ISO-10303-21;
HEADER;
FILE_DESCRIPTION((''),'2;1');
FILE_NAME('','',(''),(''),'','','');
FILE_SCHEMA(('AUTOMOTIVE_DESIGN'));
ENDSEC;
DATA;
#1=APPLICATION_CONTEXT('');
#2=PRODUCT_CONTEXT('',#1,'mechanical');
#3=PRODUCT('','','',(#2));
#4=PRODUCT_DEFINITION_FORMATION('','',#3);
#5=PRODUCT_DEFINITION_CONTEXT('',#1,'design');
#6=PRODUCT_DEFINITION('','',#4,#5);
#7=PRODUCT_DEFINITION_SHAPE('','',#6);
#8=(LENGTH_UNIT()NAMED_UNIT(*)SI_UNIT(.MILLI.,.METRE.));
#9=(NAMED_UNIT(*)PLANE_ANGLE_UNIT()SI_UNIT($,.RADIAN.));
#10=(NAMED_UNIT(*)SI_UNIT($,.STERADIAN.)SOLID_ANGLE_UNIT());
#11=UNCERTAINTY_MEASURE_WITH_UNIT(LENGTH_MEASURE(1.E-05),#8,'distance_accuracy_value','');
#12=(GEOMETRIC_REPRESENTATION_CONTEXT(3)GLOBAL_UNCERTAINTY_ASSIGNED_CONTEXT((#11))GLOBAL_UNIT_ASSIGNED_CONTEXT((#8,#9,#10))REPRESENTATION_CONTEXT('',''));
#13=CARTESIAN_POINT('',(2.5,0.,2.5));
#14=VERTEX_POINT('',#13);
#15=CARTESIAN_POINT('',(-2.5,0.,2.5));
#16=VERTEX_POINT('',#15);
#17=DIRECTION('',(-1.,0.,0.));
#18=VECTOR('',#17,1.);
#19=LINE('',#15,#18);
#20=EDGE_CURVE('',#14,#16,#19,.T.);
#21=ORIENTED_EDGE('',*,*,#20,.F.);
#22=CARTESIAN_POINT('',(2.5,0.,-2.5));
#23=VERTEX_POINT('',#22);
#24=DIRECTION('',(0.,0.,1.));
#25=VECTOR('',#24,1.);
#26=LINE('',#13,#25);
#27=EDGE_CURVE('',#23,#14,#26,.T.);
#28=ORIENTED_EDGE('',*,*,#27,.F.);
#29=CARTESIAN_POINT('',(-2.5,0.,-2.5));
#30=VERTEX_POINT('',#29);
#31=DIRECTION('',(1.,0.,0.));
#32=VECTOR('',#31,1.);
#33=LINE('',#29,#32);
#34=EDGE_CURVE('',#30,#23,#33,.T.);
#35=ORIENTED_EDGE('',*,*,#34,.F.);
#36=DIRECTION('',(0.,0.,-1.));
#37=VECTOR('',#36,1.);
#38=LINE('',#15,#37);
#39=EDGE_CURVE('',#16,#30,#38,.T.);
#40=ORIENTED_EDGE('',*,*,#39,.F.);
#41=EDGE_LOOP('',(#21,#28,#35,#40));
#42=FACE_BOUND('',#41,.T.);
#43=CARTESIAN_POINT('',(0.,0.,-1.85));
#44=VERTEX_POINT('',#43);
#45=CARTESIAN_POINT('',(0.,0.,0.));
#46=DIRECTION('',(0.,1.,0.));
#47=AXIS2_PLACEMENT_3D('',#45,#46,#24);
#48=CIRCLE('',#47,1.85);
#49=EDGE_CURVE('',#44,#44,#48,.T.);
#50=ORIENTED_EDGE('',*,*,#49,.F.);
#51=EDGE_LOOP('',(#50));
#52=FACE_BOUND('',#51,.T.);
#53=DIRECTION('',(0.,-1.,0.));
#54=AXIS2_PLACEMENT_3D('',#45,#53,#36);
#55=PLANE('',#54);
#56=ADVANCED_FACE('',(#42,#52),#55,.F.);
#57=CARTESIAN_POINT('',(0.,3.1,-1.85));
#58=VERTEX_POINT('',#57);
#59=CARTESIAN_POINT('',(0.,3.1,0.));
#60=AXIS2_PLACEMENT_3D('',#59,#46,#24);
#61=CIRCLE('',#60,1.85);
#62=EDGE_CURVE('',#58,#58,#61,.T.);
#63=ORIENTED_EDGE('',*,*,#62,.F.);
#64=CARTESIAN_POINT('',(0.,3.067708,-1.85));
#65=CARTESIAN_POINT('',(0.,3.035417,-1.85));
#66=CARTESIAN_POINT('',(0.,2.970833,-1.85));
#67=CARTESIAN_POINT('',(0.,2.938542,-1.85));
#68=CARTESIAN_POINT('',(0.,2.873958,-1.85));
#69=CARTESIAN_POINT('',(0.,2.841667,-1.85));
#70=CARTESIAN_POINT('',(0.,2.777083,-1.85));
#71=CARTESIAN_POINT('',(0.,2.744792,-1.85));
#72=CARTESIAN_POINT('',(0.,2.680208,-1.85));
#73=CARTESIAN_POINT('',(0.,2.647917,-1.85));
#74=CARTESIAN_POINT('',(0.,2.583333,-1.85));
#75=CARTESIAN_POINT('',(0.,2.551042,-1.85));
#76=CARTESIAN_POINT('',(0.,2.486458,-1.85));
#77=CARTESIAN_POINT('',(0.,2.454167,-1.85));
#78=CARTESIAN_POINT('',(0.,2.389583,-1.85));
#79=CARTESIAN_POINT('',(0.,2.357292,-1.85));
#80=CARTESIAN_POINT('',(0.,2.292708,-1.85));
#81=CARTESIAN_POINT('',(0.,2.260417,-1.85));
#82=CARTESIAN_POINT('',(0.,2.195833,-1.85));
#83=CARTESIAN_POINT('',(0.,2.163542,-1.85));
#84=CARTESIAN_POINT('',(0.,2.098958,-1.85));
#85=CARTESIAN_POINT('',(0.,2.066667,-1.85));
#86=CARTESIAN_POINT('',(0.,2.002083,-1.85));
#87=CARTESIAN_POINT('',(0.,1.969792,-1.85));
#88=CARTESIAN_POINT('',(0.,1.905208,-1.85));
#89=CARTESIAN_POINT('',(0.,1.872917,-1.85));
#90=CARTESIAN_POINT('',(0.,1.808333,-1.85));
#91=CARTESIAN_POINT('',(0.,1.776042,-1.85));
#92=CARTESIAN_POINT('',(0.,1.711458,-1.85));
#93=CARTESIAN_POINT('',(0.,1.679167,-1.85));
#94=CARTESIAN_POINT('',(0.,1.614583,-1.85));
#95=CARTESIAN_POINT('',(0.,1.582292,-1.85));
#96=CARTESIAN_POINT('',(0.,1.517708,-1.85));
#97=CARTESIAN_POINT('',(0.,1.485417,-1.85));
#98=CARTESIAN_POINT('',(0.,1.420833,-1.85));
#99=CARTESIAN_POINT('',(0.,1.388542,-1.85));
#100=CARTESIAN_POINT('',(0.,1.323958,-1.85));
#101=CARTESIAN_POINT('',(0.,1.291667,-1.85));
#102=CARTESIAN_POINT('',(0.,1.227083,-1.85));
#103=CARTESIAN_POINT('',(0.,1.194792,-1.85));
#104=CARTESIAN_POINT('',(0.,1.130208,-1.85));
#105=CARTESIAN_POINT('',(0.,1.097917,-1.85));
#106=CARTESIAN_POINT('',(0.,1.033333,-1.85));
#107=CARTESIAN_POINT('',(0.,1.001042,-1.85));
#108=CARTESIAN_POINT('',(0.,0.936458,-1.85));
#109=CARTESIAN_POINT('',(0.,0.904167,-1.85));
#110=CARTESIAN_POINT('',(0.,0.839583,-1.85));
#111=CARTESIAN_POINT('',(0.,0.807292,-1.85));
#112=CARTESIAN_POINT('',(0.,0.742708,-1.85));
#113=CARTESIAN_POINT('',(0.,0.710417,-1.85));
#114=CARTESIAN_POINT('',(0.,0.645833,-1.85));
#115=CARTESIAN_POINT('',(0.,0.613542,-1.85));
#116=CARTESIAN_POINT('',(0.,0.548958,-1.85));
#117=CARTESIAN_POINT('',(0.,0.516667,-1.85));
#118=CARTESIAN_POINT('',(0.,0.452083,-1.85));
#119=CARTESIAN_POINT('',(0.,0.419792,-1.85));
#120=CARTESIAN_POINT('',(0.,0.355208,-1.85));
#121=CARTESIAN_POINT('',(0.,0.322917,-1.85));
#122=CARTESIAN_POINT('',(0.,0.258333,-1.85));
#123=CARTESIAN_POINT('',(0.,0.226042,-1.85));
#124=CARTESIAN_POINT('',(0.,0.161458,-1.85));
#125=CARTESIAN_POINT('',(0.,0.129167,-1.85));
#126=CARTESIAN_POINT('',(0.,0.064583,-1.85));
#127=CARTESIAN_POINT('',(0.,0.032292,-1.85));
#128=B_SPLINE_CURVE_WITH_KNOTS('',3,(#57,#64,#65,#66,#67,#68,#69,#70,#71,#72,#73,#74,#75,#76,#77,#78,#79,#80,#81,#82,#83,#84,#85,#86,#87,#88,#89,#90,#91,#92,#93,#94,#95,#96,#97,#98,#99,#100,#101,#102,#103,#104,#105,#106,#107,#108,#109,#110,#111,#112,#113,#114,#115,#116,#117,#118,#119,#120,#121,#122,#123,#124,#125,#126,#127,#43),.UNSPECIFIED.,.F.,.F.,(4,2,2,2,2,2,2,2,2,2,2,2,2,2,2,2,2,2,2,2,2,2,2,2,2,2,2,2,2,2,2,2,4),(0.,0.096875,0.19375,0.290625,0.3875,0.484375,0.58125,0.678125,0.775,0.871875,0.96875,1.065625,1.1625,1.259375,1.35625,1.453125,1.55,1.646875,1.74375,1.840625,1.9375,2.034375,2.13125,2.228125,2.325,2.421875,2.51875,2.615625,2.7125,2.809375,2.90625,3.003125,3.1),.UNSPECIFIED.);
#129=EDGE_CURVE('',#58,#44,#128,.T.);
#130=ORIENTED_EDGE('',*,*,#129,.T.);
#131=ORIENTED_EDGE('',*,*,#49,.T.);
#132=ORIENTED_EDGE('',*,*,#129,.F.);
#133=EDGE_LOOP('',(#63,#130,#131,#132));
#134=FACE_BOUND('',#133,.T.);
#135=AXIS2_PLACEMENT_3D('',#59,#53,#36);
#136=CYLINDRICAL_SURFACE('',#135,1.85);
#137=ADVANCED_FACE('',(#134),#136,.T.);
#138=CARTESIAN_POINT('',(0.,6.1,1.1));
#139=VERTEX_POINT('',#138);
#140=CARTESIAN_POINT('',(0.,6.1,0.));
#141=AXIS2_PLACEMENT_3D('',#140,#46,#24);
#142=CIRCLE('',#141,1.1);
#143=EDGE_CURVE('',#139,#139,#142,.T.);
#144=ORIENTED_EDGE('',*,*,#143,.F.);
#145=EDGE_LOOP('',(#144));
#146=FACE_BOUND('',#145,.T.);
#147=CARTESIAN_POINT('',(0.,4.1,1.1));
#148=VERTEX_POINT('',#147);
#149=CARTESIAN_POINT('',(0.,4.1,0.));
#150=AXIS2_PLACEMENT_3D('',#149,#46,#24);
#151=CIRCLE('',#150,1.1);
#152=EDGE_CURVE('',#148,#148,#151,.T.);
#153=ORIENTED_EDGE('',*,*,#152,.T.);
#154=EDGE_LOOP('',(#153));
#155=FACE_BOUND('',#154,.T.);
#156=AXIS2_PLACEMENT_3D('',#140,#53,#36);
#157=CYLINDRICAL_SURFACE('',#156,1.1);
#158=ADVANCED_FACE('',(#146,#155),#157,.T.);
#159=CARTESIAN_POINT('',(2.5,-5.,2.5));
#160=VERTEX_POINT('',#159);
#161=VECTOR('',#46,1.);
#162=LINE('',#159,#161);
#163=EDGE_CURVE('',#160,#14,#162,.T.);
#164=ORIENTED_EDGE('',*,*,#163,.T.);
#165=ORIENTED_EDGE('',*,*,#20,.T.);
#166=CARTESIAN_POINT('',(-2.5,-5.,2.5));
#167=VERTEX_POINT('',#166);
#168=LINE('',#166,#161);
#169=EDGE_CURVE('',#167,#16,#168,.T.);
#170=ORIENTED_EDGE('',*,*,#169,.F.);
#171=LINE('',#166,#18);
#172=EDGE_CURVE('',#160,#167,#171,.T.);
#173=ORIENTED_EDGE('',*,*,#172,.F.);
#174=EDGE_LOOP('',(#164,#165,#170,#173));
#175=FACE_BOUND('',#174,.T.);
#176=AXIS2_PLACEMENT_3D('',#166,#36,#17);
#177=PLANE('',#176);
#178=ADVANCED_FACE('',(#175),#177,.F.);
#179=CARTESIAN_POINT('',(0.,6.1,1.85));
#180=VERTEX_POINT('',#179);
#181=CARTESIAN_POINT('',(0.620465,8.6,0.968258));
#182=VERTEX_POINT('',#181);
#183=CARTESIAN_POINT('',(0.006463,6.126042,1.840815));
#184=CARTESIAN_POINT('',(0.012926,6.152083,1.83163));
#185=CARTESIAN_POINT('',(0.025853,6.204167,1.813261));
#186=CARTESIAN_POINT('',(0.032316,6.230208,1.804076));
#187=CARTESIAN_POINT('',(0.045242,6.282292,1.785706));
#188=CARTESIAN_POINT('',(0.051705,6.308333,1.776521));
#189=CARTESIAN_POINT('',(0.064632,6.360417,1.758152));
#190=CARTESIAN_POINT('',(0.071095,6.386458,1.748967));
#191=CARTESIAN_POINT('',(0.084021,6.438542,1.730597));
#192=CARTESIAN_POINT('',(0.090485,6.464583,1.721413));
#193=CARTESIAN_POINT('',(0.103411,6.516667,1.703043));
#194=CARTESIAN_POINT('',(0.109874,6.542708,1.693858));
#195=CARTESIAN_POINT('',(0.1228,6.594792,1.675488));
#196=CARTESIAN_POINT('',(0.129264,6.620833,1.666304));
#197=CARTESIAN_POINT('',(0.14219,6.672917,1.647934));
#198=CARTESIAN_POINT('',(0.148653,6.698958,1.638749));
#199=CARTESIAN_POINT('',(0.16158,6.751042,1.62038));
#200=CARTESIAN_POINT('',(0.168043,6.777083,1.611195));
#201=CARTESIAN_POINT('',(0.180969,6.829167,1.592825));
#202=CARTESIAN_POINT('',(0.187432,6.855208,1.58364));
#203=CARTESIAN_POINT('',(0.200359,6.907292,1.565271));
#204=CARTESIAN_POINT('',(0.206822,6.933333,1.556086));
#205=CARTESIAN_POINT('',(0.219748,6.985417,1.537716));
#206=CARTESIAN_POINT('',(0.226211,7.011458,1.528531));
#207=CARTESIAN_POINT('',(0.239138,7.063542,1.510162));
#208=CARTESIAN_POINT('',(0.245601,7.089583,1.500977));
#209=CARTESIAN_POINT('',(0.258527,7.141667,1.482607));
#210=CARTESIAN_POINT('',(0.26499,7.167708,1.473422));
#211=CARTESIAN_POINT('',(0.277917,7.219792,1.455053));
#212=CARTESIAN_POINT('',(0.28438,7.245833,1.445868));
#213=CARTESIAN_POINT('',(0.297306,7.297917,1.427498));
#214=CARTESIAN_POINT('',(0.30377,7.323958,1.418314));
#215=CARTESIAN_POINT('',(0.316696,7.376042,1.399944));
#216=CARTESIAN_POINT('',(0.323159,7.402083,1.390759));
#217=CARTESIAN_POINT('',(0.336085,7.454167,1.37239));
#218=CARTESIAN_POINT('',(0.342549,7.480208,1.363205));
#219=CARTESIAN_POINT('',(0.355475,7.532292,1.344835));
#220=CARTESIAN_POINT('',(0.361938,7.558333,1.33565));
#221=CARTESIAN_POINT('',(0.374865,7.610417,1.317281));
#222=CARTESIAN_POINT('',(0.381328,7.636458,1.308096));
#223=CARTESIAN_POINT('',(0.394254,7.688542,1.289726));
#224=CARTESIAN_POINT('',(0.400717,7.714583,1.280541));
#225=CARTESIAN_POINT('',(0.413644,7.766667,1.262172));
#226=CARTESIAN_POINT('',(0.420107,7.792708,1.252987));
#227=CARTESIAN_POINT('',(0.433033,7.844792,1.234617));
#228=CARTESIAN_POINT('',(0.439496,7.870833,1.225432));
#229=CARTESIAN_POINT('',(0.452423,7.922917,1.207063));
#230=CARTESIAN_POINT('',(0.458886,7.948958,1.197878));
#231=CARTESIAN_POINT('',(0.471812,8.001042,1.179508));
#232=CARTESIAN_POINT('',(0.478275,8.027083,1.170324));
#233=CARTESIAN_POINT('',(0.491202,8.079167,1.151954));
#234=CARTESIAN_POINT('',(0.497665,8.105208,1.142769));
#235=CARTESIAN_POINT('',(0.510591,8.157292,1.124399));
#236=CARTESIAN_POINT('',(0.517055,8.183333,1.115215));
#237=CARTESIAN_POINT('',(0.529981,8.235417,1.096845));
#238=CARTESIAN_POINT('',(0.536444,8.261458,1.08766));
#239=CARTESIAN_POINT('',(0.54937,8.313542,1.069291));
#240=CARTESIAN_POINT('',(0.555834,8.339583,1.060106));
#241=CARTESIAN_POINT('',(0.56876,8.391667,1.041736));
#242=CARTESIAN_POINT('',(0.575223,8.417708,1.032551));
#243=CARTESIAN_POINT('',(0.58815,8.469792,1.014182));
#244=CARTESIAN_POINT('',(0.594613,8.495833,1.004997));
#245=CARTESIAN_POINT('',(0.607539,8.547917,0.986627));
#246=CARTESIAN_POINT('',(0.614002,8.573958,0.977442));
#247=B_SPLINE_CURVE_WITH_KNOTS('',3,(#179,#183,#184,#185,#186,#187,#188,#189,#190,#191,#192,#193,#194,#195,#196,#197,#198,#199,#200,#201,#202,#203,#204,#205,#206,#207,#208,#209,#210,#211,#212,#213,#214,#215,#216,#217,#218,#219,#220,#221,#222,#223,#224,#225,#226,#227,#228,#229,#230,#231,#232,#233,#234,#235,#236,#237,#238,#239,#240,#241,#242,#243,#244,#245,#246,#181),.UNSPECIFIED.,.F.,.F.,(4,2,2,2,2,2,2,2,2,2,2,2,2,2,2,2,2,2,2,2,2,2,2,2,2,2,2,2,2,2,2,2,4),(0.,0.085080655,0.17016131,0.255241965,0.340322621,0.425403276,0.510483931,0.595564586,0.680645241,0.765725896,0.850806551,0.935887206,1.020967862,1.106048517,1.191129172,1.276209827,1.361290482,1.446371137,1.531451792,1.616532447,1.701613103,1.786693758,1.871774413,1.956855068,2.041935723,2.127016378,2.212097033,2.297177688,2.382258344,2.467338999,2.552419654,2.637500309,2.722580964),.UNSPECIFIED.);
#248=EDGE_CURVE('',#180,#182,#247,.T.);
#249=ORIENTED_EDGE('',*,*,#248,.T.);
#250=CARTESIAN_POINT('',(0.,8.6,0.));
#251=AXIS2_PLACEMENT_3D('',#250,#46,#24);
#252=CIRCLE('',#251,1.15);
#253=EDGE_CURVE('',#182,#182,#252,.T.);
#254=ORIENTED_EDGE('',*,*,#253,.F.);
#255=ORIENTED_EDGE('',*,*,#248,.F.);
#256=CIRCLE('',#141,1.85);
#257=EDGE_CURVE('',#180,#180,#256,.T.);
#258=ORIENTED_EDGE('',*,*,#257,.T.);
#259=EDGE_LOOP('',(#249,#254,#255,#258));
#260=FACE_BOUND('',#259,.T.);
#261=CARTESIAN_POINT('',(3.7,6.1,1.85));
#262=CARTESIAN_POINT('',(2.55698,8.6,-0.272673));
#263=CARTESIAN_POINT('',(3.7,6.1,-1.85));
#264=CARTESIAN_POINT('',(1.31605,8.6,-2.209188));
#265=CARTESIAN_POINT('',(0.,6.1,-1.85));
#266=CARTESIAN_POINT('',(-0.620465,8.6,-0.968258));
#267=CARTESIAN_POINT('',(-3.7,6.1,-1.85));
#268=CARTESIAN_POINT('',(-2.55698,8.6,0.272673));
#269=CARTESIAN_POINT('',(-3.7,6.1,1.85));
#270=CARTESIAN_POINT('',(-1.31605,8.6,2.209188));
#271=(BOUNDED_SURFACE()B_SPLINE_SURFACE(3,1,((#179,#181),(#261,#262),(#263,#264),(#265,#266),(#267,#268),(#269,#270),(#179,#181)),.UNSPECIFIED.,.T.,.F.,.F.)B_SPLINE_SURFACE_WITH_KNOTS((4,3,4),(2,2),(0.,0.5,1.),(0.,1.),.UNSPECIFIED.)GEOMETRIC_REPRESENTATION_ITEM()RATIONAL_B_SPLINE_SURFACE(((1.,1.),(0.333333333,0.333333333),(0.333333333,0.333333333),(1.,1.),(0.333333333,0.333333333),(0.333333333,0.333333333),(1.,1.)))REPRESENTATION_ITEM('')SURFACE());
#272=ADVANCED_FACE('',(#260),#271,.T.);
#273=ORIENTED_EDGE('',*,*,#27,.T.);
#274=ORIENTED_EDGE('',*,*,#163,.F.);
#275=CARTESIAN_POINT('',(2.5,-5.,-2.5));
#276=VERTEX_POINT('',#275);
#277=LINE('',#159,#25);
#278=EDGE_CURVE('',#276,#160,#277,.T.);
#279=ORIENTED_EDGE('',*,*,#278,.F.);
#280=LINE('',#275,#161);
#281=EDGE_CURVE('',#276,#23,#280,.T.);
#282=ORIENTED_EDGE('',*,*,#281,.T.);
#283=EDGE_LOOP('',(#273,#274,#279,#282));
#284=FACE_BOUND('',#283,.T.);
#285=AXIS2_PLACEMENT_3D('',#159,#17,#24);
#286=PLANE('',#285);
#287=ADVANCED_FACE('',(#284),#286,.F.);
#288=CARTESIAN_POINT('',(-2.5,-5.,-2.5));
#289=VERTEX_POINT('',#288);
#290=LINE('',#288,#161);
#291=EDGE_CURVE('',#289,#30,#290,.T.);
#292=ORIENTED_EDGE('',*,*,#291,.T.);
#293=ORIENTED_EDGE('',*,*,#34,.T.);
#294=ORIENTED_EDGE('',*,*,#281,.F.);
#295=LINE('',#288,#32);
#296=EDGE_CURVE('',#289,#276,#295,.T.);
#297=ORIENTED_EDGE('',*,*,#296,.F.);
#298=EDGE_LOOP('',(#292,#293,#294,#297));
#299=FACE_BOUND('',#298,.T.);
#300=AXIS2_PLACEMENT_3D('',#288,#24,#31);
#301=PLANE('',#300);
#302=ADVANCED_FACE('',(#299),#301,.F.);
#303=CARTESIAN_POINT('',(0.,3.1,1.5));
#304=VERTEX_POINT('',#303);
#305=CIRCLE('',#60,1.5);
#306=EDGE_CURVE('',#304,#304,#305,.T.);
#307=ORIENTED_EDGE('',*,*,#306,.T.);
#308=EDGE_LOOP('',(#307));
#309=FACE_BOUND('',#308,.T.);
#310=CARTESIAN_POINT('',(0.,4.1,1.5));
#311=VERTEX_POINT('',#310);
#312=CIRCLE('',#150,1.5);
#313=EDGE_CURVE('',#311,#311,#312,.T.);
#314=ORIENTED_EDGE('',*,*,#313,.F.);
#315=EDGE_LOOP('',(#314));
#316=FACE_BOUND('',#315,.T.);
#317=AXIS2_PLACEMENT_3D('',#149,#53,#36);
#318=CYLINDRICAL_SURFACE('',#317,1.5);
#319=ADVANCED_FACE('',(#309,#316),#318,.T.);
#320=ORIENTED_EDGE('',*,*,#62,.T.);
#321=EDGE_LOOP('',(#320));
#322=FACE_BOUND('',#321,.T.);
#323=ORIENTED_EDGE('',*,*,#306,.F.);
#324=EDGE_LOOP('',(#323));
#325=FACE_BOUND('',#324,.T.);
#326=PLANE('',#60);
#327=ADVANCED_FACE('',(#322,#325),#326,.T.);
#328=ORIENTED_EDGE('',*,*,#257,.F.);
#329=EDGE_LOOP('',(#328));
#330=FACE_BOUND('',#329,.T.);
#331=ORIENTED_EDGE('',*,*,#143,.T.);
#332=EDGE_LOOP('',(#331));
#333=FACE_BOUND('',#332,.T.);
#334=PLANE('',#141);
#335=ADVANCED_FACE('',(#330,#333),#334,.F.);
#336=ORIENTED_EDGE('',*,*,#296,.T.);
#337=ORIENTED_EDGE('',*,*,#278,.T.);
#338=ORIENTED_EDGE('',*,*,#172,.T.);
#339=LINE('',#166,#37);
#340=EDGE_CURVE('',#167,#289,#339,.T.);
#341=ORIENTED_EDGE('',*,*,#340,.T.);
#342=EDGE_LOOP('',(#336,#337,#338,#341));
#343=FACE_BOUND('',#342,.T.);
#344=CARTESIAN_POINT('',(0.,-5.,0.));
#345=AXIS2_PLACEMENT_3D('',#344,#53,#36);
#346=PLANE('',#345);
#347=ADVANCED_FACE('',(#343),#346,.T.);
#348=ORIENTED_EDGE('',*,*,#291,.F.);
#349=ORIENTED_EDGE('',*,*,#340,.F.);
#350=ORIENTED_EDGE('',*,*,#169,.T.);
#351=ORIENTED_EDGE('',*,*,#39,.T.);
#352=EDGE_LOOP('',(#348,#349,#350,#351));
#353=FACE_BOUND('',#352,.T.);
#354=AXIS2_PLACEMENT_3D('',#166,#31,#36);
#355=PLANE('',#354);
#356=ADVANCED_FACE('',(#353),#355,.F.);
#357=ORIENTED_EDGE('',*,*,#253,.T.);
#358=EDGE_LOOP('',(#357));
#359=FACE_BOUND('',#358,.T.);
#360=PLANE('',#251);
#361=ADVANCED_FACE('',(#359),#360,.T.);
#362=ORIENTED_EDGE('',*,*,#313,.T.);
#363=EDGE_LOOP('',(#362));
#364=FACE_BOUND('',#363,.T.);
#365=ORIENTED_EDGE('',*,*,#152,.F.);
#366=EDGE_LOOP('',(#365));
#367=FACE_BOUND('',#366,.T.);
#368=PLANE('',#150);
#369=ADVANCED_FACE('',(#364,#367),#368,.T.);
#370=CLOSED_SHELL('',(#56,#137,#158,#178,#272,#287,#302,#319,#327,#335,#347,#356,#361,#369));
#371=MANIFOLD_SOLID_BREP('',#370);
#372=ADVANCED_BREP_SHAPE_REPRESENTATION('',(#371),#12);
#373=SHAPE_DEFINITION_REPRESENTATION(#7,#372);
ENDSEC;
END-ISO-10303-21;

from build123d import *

# Parameters (mm, degrees)
SKETCH1_R           = 1.85
BOSS_EXTRUDE1_DEPTH = 3.1
SKETCH2_R           = 1.5
BOSS_EXTRUDE2_DEPTH = 1
SKETCH3_R           = 1.1
BOSS_EXTRUDE3_DEPTH = 2
SKETCH6_W           = 5
SKETCH6_H           = 5
BOSS_EXTRUDE4_DEPTH = 5


with BuildPart() as part:
    # Sketch1 → Boss-Extrude1 (new body)
    with BuildSketch(Plane(origin=(0, 0, 0), x_dir=(1, 0, 0), z_dir=(0, 1, 0))):
        with Locations(Location((0, 0, 0), (0, 0, 90))):
            Circle(SKETCH1_R)
    extrude(amount=BOSS_EXTRUDE1_DEPTH)

    # Sketch2 → Boss-Extrude2 (add)
    with BuildSketch(Plane(origin=(0, 3.1, 0), x_dir=(1, 0, 0), z_dir=(0, 1, 0))):
        with Locations(Location((0, 0, 0), (0, 0, 270))):
            Circle(SKETCH2_R)
    extrude(amount=BOSS_EXTRUDE2_DEPTH)

    # Sketch3 → Boss-Extrude3 (add)
    with BuildSketch(Plane(origin=(0, 4.1, 0), x_dir=(1, 0, 0), z_dir=(0, 1, 0))):
        with Locations(Location((0, 0, 0), (0, 0, 270))):
            Circle(SKETCH3_R)
    extrude(amount=BOSS_EXTRUDE3_DEPTH)

    # Loft1: read off the stored shape, not the designer's step
    # Loft1: loft between two sections, ruled curve by curve
    loft1_from = [
        Edge.make_bspline([(0, 6.1, 1.85), (3.7, 6.1, 1.85), (3.7, 6.1, -1.85), (0, 6.1, -1.85), (-3.7, 6.1, -1.85), (-3.7, 6.1, 1.85), (0, 6.1, 1.85)], [0, 0, 0, 0, 0.5, 0.5, 0.5, 1, 1, 1, 1], 3, [1, 0.333333333, 0.333333333, 1, 0.333333333, 0.333333333, 1]),
    ]
    loft1_to = [
        Edge.make_bspline([(0.620465421, 8.6, 0.968257539), (2.556980499, 8.6, -0.272673303), (1.316049657, 8.6, -2.209188381), (-0.620465421, 8.6, -0.968257539), (-2.556980499, 8.6, 0.272673303), (-1.316049657, 8.6, 2.209188381), (0.620465421, 8.6, 0.968257539)], [0, 0, 0, 0, 0.5, 0.5, 0.5, 1, 1, 1, 1], 3, [1, 0.333333333, 0.333333333, 1, 0.333333333, 0.333333333, 1]),
    ]
    loft1 = Solid(Shell([*[Face.make_surface_from_curves(loft1_from[k], loft1_to[k]) for k in range(1)], Face(Wire(loft1_from)), Face(Wire(loft1_to))]))
    add(loft1)

    # Sketch6 → Boss-Extrude4 (add)
    with BuildSketch(Plane.XZ):
        Rectangle(SKETCH6_W, SKETCH6_H)
    extrude(amount=BOSS_EXTRUDE4_DEPTH)


solid = part.part
